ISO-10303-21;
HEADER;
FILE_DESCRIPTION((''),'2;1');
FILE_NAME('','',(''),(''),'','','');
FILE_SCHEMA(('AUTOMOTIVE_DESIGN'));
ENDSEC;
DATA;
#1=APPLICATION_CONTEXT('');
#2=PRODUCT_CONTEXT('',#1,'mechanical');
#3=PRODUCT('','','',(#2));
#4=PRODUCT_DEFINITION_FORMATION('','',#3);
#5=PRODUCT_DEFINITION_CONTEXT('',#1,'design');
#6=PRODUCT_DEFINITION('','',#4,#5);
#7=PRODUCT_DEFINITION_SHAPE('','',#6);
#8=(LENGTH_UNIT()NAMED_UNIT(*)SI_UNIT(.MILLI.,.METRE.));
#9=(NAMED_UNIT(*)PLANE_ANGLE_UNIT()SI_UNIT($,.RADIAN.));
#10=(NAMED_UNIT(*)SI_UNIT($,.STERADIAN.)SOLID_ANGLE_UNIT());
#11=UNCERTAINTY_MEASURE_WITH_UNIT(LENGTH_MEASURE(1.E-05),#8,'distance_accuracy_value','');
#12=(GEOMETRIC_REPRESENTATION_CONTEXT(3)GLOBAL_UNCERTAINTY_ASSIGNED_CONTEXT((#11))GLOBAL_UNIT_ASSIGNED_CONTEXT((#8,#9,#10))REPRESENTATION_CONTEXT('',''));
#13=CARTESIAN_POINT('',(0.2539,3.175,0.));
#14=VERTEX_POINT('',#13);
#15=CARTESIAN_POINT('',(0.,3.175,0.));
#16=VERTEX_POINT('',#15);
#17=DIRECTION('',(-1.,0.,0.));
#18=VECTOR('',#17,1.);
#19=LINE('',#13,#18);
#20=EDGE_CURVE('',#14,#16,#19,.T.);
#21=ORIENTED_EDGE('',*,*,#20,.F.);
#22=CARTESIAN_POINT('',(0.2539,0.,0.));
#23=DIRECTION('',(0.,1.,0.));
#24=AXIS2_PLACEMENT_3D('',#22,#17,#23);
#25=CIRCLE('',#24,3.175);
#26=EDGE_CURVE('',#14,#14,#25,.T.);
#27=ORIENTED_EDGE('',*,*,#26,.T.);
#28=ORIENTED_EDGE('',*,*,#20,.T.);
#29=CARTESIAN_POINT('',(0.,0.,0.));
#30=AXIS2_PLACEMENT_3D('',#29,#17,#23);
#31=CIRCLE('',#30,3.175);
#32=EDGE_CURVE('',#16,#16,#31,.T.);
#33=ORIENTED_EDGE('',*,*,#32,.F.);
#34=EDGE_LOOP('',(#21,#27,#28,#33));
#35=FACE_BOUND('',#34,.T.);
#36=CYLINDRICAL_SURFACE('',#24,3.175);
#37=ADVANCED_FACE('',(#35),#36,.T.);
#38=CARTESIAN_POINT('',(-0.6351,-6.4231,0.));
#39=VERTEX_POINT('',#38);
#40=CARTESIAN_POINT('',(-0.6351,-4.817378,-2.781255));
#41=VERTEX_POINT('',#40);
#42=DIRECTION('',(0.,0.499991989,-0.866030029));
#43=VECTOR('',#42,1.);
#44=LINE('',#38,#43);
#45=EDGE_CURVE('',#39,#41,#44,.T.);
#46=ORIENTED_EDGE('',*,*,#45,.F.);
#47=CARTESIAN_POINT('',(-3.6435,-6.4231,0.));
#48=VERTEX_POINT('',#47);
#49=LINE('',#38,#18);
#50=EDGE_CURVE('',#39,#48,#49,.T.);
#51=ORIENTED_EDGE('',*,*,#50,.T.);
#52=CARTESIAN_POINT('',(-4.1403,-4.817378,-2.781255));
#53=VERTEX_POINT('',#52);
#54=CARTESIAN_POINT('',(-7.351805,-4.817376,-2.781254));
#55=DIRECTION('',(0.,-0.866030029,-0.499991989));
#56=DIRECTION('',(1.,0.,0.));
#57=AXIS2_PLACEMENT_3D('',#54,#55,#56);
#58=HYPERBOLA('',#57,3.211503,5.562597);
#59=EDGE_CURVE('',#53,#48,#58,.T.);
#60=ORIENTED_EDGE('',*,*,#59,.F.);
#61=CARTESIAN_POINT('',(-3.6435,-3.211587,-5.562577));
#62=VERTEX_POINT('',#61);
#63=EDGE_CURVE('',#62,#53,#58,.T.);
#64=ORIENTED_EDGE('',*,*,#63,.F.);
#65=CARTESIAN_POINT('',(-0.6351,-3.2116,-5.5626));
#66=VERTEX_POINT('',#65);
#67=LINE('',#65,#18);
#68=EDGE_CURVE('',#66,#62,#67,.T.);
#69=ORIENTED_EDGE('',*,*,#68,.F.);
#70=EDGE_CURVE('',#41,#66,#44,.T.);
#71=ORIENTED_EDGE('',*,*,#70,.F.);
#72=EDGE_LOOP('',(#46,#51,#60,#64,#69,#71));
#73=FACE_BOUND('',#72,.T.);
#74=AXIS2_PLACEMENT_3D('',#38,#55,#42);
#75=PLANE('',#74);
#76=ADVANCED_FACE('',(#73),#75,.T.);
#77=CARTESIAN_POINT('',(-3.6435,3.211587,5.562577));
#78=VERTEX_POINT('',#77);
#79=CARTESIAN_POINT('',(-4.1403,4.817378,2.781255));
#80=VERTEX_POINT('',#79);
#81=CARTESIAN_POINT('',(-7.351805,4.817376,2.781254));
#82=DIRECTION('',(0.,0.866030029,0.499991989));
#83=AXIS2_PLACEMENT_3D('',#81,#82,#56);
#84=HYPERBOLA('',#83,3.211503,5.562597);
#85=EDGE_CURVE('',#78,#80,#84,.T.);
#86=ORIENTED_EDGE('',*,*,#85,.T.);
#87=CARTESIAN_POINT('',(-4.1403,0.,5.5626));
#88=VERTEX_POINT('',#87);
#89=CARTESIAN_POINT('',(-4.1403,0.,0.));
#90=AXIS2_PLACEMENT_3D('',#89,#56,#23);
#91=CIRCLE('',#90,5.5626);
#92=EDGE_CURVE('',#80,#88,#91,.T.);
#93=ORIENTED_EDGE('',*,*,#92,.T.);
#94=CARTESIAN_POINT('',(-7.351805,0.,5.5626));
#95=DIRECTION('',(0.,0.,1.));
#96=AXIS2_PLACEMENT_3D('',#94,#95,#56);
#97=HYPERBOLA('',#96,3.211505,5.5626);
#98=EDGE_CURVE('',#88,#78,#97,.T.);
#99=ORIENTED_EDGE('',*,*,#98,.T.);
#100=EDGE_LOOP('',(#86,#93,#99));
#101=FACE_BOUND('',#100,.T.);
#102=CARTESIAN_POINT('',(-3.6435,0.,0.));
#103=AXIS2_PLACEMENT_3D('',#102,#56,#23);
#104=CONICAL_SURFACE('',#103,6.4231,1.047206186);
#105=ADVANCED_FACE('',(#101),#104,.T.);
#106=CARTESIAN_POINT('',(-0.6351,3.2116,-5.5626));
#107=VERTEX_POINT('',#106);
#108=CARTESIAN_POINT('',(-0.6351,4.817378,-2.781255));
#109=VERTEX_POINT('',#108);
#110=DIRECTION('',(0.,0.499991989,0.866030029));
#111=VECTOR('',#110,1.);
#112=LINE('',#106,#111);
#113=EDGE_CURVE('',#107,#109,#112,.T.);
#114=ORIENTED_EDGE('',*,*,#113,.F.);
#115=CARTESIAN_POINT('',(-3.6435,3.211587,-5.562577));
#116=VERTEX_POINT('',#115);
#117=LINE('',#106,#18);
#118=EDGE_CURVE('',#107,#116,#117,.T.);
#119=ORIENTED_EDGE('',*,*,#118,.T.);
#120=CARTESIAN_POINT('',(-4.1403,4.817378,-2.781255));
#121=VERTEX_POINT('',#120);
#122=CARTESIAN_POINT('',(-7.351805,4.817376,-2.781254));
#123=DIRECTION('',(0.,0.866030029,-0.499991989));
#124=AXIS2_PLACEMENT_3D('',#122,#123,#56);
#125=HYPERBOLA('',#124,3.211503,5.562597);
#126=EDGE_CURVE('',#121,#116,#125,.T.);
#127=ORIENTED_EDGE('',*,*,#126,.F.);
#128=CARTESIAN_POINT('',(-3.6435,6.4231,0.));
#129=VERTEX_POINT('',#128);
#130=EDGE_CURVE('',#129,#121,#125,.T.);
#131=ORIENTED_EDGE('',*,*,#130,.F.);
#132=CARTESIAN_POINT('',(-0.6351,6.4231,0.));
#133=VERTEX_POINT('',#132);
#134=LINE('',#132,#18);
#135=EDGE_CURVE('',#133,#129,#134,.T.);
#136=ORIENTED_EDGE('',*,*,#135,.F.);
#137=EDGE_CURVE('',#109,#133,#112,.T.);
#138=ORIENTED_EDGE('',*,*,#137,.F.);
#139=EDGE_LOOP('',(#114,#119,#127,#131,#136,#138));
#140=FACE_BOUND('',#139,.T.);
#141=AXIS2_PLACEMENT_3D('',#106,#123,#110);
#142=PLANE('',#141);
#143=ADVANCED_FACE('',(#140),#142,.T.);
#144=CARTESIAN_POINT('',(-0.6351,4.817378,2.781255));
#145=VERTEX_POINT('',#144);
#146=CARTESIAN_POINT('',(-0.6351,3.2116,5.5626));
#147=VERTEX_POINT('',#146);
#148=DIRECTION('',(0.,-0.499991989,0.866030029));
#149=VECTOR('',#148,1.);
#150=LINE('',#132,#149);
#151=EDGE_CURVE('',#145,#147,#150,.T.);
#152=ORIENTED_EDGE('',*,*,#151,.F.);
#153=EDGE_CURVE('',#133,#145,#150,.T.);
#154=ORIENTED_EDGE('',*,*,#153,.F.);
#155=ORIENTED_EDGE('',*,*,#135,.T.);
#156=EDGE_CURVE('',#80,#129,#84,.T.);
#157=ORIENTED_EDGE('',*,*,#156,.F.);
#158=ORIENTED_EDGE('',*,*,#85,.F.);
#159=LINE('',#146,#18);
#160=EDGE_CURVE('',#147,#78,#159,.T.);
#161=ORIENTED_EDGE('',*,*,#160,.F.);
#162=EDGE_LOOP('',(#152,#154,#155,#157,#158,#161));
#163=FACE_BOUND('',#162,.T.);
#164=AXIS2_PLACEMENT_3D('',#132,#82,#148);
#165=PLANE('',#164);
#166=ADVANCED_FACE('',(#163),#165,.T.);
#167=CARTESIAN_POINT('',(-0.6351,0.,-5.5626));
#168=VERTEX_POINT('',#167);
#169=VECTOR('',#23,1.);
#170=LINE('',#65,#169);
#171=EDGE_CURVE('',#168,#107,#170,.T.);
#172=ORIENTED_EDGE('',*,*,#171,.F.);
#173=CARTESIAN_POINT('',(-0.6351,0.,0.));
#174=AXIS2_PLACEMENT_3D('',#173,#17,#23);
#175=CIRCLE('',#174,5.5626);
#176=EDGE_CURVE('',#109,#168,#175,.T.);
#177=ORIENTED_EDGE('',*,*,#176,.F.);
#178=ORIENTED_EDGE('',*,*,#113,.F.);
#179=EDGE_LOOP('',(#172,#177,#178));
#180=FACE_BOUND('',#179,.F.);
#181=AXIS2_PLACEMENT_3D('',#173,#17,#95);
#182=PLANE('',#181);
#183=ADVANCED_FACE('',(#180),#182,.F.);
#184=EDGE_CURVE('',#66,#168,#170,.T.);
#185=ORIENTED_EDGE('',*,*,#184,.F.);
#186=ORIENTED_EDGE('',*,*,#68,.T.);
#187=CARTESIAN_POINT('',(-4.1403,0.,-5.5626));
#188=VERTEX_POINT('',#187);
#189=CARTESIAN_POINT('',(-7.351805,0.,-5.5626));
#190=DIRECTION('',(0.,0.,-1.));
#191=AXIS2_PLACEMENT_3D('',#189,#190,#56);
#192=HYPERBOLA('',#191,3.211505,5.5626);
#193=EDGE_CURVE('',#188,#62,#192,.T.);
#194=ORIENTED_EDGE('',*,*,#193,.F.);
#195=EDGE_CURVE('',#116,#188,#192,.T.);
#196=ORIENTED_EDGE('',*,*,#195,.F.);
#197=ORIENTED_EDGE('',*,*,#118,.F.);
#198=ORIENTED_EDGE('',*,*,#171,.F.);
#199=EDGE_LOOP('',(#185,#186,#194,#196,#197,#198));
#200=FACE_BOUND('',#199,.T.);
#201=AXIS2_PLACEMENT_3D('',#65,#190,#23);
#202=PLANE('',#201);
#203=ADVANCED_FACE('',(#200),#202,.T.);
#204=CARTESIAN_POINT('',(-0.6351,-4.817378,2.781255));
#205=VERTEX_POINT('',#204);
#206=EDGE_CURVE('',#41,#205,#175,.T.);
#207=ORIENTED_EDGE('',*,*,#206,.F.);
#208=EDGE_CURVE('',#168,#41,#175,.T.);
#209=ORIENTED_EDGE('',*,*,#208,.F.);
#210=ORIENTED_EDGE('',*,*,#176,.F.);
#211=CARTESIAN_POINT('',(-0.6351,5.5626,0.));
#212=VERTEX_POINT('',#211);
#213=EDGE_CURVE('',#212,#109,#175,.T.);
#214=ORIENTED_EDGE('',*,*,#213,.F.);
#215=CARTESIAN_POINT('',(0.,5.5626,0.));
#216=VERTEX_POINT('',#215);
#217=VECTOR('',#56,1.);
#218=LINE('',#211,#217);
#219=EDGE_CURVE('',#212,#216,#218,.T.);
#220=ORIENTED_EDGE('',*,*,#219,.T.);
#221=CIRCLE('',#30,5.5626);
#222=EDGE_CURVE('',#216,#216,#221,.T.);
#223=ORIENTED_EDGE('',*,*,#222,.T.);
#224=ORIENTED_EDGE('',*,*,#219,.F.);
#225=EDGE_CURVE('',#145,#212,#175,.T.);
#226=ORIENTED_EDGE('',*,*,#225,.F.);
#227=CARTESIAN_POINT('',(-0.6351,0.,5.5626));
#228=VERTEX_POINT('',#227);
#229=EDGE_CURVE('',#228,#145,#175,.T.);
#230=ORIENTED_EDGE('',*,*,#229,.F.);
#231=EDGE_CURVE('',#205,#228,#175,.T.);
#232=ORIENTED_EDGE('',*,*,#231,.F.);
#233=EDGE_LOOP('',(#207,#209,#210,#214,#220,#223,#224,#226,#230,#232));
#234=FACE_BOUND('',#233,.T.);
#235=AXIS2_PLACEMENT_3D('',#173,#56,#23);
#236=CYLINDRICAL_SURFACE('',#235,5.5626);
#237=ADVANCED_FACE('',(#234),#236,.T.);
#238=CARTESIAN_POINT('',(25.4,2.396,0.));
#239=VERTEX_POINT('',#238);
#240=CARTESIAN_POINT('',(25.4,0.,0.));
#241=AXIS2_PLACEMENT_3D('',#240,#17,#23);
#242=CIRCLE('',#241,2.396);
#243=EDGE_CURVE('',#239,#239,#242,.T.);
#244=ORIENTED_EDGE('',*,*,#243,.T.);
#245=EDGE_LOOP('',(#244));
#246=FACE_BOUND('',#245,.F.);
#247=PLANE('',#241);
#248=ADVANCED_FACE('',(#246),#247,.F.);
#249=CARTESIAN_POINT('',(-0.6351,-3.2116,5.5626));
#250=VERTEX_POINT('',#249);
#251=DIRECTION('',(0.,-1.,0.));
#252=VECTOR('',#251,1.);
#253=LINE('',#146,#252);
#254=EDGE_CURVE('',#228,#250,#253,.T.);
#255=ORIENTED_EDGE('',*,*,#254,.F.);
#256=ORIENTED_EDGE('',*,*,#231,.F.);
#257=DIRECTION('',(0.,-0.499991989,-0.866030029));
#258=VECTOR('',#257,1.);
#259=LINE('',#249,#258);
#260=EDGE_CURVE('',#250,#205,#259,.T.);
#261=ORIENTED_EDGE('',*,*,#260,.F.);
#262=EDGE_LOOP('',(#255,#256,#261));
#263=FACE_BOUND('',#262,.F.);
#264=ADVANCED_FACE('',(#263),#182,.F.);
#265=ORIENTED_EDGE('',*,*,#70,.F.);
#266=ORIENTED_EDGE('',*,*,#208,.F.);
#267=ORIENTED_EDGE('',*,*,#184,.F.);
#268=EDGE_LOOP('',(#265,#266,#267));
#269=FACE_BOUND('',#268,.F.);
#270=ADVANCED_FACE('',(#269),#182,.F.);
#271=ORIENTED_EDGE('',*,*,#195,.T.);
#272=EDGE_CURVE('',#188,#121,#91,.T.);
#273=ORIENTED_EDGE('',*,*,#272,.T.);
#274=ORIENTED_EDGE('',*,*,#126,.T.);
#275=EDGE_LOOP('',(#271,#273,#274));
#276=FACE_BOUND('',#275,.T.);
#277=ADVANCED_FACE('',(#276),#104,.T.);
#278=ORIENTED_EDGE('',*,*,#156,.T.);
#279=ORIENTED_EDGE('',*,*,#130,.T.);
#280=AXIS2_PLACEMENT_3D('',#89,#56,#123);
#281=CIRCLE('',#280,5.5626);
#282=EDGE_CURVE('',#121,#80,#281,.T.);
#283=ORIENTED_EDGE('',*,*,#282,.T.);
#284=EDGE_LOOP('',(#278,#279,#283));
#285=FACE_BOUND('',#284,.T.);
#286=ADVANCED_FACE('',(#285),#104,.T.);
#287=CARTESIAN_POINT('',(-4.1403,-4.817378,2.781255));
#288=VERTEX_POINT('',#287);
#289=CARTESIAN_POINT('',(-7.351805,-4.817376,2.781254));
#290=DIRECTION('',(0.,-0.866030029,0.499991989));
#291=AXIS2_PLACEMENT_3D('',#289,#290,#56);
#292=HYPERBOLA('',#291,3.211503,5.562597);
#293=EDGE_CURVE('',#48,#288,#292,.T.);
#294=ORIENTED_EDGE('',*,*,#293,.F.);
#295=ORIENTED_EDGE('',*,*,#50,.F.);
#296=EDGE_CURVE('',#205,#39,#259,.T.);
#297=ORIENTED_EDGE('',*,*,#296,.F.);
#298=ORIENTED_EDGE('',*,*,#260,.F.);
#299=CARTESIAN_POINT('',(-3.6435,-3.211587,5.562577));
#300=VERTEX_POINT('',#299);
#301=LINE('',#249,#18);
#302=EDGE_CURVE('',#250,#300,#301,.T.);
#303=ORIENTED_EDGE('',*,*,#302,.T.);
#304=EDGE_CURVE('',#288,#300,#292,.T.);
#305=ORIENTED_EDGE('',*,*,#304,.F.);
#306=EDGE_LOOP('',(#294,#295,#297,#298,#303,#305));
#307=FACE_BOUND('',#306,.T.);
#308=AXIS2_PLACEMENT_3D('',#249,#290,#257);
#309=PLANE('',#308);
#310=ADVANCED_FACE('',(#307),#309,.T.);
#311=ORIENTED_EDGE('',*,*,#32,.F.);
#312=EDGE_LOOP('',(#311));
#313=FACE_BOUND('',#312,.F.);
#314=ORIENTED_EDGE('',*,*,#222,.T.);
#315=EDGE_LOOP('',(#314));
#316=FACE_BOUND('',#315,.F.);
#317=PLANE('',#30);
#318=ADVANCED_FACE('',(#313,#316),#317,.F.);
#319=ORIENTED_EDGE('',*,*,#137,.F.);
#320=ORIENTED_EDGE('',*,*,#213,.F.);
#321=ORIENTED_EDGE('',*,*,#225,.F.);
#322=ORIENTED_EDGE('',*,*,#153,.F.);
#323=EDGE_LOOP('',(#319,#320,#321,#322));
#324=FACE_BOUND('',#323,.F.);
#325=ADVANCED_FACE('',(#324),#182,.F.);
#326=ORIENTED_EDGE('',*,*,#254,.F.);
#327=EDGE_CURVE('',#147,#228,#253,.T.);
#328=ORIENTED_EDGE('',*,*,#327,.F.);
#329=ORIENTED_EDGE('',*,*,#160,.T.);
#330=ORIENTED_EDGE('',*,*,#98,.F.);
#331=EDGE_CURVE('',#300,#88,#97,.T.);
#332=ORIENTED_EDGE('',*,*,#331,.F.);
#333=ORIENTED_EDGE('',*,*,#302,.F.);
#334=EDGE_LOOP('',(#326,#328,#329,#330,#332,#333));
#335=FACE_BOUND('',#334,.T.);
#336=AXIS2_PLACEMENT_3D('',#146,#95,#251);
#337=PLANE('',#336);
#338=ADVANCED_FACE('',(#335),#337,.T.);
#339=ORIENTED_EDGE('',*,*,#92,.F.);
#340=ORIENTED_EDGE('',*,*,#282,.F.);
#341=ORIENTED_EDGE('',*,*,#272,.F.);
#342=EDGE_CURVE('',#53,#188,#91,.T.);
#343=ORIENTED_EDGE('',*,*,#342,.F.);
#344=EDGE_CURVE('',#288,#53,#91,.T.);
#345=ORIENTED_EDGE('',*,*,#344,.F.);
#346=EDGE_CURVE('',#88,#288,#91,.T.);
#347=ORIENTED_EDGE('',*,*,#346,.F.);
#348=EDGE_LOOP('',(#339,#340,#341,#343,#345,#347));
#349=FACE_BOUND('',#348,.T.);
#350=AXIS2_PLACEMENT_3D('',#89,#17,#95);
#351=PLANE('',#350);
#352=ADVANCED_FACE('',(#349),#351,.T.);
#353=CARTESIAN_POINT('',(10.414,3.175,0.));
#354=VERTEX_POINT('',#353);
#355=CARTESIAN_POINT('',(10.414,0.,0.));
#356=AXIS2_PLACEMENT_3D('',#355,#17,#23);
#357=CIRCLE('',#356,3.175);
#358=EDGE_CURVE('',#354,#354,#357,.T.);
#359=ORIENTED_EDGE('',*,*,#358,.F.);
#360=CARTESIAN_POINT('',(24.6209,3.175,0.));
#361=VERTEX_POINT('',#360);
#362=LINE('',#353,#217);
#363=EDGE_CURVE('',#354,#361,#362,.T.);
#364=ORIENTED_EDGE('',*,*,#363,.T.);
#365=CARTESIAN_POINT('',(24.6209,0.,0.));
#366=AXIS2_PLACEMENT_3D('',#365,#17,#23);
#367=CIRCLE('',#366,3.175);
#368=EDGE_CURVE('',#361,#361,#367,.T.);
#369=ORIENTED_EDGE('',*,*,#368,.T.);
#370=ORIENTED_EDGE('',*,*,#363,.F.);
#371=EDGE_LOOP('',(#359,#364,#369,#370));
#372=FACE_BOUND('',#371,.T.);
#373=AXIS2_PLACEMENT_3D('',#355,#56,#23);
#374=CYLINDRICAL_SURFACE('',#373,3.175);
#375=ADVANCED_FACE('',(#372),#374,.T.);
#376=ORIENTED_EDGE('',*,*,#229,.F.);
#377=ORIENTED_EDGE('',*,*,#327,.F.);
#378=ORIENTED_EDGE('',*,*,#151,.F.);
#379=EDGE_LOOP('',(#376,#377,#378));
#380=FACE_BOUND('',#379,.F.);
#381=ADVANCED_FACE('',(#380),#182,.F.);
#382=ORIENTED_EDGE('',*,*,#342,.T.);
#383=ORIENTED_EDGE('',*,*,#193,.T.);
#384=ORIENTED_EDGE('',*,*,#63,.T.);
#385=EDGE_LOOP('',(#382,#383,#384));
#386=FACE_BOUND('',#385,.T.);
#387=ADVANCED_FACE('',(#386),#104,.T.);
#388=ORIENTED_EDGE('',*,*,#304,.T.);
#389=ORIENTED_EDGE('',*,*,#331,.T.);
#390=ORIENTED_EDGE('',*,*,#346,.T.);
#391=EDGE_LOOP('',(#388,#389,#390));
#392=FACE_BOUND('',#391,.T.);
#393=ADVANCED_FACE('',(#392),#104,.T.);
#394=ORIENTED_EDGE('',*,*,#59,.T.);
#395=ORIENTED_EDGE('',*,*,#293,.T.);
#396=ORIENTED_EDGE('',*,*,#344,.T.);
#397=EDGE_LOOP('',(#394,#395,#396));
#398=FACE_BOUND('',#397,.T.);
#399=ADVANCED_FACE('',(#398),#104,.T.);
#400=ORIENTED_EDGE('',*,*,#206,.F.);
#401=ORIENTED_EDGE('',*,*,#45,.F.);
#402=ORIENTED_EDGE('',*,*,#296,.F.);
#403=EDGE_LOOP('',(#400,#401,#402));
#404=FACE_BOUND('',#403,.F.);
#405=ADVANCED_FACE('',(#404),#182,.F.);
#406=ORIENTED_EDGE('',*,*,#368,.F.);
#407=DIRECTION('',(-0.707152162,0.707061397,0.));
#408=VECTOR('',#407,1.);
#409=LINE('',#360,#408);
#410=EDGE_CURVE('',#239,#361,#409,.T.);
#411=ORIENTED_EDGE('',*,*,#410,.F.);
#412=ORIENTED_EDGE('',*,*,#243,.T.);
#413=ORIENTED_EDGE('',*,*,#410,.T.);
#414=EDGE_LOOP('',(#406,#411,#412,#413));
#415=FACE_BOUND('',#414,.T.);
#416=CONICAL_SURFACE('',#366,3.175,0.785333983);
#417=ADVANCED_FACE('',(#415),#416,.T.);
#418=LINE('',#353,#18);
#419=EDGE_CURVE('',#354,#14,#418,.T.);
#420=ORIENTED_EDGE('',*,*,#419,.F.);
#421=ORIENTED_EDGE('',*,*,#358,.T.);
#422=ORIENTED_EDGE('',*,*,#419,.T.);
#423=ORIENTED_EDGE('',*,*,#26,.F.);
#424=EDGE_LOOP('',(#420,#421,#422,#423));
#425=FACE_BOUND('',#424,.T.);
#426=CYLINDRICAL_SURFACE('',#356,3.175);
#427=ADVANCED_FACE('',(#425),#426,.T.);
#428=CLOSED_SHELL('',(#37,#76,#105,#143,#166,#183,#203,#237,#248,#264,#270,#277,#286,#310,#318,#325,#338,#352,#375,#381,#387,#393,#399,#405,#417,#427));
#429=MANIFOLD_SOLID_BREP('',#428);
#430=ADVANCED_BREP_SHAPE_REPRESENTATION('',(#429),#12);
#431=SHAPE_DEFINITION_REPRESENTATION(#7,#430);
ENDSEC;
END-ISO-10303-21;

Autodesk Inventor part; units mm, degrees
ref_plane "YZ Plane" through (0, 0, 0) normal (1, 0, 0) x (0, 1, 0)
ref_plane "XZ Plane" through (0, 0, 0) normal (0, 1, 0) x (-1, 0, 0)
sketch "Sketch1" plane through (0, 0, 0) normal (0, 0, 1) x (1, 0, 0)
  line L0 (0, 5.5626) -> (0, 3.175)
  line L1 (10.414, 3.175) -> (25.4, 3.175)
  line L2 (25.4, 3.175) -> (25.4, 0)
  line L3 (25.4, 0) -> (-0.6351, 0)
  line L4 (-5.8421, 0) -> (30.607, 0) projected
  line L5 (-0.6351, 0) -> (-0.6351, 5.5626)
  line L6 (-0.6351, 5.5626) -> (0, 5.5626)
  line L7 (10.414, 3.175) -> (0.2539, 3.175)
  line L8 (0.2539, 3.175) -> (0, 3.175)
  line L9 (0, -1.1125) -> (0, 6.6751) projected
  dimension "d0" = 25.4
  dimension "d1" = 14.986
  dimension "d2" = 6.35
  dimension "d9" = 0.6351
  dimension "d10" = 11.1252
  dimension "d13" = 10.1601
  dimension "d14" = 6.35
revolve "Body" add sketch "Sketch1" angle 360 about axis through (25.4, 0, 0) along (-1, 0, 0)
sketch "Sketch2" plane through (-0.6351, 0, 0) normal (-1, 0, 0) x (0, 0, 1)
  line L0 (0, 6.4231) -> (5.5626, 3.2116)
  line L1 (5.5626, 3.2116) -> (5.5626, -3.2116)
  line L2 (5.5626, -3.2116) -> (0, -6.4231)
  line L3 (0, -6.4231) -> (-5.5626, -3.2116)
  line L4 (-5.5626, -3.2116) -> (-5.5626, 3.2116)
  line L5 (-5.5626, 3.2116) -> (0, 6.4231)
  point P0 (0, 0)
  point P1 (0, 0)
  dimension "d11" = 11.1252
extrude "Head" add sketch "Sketch2" along normal blind 3.5052
sketch "Sketch4" plane through (0, 0, 0) normal (0, 0, 1) x (1, 0, 0)
  line L0 (-4.1403, 5.5626) -> (-4.1403, 6.4231)
  line L1 (-4.1403, 6.4231) -> (-3.6435, 6.4231)
  line L2 (-3.6435, 6.4231) -> (-4.1403, 5.5626)
  line L3 (-4.8413, 0) -> (0.0659, 0) projected
  line L4 (-0.6351, 6.4231) -> (-4.1403, 6.4231) projected
  line L5 (-4.1403, 3.2116) -> (-4.1403, 6.4231) projected
  dimension "d5" = 30
  dimension "d19" = 11.1252
revolve "Chamfer1" cut sketch "Sketch4" angle 360 about axis through (-10, 0, 0) along (1, 0, 0)
thread "Thread" size "1/4-20 UNC" class "2A" standard "ANSI Unified Screw Threads" length 14.986
chamfer "Chamfer2" distance 0.779 distance2 0.7791 1 edges at (25.4, -3.175, 0) measured on face at (25.4, -0.1276, -1.0506)
ref_plane "Work Plane1" through (1.525, 0, 0) normal (0, 0, 1) x (1, 0, 0)
equation "\"d0\" = NLG"
equation "\"d1\" = GEL"
equation "\"d2\" = GD"
equation "\"d10\" = SD2"
equation "\"d14\" = BDM"
equation "\"d11\" = SW"
equation "\"d3\" = KOH - SD"
equation "\"d5\" = ANG1"
equation "\"d19\" = SW0"
equation "\"d15\" = GEL"
equation "\"d6\" = -0.5 * SPD + 0.5 * GD"
equation "\"NLG\" = 25.4"
equation "\"GD\" = 6.35"
equation "\"BDM\" = 6.35"
equation "\"KOH\" = 4.1402"
equation "\"GEL\" = 14.986"
equation "\"SW\" = 11.1252"
equation "\"SW0\" = SW"
equation "\"SPD\" = GD1"
equation "\"SD2\" = SW"
equation "\"SD\" = 0.635"
equation "\"ANG1\" = 30deg"
equation "\"GAL\" = 10.16"
equation "\"GUL\" = 0.77902"
equation "\"RR\" = 0.381"
equation "\"WFT\" = SD"
equation "\"GD1\" = 4.79196"
equation "\"THREADDIA\" = 6.35"
equation "\"SDH\" = SW"
equation "\"SDHG\" = 0.254"
equation "\"TOA\" = 30deg"
equation "\"FAWI\" = 45deg"
equation "\"NND\" = 6.35"
equation "\"E0\" = 12.84961"
properties part number "AS 2465 - 1/4 x 1  UNC" material "Steel, Mild"
